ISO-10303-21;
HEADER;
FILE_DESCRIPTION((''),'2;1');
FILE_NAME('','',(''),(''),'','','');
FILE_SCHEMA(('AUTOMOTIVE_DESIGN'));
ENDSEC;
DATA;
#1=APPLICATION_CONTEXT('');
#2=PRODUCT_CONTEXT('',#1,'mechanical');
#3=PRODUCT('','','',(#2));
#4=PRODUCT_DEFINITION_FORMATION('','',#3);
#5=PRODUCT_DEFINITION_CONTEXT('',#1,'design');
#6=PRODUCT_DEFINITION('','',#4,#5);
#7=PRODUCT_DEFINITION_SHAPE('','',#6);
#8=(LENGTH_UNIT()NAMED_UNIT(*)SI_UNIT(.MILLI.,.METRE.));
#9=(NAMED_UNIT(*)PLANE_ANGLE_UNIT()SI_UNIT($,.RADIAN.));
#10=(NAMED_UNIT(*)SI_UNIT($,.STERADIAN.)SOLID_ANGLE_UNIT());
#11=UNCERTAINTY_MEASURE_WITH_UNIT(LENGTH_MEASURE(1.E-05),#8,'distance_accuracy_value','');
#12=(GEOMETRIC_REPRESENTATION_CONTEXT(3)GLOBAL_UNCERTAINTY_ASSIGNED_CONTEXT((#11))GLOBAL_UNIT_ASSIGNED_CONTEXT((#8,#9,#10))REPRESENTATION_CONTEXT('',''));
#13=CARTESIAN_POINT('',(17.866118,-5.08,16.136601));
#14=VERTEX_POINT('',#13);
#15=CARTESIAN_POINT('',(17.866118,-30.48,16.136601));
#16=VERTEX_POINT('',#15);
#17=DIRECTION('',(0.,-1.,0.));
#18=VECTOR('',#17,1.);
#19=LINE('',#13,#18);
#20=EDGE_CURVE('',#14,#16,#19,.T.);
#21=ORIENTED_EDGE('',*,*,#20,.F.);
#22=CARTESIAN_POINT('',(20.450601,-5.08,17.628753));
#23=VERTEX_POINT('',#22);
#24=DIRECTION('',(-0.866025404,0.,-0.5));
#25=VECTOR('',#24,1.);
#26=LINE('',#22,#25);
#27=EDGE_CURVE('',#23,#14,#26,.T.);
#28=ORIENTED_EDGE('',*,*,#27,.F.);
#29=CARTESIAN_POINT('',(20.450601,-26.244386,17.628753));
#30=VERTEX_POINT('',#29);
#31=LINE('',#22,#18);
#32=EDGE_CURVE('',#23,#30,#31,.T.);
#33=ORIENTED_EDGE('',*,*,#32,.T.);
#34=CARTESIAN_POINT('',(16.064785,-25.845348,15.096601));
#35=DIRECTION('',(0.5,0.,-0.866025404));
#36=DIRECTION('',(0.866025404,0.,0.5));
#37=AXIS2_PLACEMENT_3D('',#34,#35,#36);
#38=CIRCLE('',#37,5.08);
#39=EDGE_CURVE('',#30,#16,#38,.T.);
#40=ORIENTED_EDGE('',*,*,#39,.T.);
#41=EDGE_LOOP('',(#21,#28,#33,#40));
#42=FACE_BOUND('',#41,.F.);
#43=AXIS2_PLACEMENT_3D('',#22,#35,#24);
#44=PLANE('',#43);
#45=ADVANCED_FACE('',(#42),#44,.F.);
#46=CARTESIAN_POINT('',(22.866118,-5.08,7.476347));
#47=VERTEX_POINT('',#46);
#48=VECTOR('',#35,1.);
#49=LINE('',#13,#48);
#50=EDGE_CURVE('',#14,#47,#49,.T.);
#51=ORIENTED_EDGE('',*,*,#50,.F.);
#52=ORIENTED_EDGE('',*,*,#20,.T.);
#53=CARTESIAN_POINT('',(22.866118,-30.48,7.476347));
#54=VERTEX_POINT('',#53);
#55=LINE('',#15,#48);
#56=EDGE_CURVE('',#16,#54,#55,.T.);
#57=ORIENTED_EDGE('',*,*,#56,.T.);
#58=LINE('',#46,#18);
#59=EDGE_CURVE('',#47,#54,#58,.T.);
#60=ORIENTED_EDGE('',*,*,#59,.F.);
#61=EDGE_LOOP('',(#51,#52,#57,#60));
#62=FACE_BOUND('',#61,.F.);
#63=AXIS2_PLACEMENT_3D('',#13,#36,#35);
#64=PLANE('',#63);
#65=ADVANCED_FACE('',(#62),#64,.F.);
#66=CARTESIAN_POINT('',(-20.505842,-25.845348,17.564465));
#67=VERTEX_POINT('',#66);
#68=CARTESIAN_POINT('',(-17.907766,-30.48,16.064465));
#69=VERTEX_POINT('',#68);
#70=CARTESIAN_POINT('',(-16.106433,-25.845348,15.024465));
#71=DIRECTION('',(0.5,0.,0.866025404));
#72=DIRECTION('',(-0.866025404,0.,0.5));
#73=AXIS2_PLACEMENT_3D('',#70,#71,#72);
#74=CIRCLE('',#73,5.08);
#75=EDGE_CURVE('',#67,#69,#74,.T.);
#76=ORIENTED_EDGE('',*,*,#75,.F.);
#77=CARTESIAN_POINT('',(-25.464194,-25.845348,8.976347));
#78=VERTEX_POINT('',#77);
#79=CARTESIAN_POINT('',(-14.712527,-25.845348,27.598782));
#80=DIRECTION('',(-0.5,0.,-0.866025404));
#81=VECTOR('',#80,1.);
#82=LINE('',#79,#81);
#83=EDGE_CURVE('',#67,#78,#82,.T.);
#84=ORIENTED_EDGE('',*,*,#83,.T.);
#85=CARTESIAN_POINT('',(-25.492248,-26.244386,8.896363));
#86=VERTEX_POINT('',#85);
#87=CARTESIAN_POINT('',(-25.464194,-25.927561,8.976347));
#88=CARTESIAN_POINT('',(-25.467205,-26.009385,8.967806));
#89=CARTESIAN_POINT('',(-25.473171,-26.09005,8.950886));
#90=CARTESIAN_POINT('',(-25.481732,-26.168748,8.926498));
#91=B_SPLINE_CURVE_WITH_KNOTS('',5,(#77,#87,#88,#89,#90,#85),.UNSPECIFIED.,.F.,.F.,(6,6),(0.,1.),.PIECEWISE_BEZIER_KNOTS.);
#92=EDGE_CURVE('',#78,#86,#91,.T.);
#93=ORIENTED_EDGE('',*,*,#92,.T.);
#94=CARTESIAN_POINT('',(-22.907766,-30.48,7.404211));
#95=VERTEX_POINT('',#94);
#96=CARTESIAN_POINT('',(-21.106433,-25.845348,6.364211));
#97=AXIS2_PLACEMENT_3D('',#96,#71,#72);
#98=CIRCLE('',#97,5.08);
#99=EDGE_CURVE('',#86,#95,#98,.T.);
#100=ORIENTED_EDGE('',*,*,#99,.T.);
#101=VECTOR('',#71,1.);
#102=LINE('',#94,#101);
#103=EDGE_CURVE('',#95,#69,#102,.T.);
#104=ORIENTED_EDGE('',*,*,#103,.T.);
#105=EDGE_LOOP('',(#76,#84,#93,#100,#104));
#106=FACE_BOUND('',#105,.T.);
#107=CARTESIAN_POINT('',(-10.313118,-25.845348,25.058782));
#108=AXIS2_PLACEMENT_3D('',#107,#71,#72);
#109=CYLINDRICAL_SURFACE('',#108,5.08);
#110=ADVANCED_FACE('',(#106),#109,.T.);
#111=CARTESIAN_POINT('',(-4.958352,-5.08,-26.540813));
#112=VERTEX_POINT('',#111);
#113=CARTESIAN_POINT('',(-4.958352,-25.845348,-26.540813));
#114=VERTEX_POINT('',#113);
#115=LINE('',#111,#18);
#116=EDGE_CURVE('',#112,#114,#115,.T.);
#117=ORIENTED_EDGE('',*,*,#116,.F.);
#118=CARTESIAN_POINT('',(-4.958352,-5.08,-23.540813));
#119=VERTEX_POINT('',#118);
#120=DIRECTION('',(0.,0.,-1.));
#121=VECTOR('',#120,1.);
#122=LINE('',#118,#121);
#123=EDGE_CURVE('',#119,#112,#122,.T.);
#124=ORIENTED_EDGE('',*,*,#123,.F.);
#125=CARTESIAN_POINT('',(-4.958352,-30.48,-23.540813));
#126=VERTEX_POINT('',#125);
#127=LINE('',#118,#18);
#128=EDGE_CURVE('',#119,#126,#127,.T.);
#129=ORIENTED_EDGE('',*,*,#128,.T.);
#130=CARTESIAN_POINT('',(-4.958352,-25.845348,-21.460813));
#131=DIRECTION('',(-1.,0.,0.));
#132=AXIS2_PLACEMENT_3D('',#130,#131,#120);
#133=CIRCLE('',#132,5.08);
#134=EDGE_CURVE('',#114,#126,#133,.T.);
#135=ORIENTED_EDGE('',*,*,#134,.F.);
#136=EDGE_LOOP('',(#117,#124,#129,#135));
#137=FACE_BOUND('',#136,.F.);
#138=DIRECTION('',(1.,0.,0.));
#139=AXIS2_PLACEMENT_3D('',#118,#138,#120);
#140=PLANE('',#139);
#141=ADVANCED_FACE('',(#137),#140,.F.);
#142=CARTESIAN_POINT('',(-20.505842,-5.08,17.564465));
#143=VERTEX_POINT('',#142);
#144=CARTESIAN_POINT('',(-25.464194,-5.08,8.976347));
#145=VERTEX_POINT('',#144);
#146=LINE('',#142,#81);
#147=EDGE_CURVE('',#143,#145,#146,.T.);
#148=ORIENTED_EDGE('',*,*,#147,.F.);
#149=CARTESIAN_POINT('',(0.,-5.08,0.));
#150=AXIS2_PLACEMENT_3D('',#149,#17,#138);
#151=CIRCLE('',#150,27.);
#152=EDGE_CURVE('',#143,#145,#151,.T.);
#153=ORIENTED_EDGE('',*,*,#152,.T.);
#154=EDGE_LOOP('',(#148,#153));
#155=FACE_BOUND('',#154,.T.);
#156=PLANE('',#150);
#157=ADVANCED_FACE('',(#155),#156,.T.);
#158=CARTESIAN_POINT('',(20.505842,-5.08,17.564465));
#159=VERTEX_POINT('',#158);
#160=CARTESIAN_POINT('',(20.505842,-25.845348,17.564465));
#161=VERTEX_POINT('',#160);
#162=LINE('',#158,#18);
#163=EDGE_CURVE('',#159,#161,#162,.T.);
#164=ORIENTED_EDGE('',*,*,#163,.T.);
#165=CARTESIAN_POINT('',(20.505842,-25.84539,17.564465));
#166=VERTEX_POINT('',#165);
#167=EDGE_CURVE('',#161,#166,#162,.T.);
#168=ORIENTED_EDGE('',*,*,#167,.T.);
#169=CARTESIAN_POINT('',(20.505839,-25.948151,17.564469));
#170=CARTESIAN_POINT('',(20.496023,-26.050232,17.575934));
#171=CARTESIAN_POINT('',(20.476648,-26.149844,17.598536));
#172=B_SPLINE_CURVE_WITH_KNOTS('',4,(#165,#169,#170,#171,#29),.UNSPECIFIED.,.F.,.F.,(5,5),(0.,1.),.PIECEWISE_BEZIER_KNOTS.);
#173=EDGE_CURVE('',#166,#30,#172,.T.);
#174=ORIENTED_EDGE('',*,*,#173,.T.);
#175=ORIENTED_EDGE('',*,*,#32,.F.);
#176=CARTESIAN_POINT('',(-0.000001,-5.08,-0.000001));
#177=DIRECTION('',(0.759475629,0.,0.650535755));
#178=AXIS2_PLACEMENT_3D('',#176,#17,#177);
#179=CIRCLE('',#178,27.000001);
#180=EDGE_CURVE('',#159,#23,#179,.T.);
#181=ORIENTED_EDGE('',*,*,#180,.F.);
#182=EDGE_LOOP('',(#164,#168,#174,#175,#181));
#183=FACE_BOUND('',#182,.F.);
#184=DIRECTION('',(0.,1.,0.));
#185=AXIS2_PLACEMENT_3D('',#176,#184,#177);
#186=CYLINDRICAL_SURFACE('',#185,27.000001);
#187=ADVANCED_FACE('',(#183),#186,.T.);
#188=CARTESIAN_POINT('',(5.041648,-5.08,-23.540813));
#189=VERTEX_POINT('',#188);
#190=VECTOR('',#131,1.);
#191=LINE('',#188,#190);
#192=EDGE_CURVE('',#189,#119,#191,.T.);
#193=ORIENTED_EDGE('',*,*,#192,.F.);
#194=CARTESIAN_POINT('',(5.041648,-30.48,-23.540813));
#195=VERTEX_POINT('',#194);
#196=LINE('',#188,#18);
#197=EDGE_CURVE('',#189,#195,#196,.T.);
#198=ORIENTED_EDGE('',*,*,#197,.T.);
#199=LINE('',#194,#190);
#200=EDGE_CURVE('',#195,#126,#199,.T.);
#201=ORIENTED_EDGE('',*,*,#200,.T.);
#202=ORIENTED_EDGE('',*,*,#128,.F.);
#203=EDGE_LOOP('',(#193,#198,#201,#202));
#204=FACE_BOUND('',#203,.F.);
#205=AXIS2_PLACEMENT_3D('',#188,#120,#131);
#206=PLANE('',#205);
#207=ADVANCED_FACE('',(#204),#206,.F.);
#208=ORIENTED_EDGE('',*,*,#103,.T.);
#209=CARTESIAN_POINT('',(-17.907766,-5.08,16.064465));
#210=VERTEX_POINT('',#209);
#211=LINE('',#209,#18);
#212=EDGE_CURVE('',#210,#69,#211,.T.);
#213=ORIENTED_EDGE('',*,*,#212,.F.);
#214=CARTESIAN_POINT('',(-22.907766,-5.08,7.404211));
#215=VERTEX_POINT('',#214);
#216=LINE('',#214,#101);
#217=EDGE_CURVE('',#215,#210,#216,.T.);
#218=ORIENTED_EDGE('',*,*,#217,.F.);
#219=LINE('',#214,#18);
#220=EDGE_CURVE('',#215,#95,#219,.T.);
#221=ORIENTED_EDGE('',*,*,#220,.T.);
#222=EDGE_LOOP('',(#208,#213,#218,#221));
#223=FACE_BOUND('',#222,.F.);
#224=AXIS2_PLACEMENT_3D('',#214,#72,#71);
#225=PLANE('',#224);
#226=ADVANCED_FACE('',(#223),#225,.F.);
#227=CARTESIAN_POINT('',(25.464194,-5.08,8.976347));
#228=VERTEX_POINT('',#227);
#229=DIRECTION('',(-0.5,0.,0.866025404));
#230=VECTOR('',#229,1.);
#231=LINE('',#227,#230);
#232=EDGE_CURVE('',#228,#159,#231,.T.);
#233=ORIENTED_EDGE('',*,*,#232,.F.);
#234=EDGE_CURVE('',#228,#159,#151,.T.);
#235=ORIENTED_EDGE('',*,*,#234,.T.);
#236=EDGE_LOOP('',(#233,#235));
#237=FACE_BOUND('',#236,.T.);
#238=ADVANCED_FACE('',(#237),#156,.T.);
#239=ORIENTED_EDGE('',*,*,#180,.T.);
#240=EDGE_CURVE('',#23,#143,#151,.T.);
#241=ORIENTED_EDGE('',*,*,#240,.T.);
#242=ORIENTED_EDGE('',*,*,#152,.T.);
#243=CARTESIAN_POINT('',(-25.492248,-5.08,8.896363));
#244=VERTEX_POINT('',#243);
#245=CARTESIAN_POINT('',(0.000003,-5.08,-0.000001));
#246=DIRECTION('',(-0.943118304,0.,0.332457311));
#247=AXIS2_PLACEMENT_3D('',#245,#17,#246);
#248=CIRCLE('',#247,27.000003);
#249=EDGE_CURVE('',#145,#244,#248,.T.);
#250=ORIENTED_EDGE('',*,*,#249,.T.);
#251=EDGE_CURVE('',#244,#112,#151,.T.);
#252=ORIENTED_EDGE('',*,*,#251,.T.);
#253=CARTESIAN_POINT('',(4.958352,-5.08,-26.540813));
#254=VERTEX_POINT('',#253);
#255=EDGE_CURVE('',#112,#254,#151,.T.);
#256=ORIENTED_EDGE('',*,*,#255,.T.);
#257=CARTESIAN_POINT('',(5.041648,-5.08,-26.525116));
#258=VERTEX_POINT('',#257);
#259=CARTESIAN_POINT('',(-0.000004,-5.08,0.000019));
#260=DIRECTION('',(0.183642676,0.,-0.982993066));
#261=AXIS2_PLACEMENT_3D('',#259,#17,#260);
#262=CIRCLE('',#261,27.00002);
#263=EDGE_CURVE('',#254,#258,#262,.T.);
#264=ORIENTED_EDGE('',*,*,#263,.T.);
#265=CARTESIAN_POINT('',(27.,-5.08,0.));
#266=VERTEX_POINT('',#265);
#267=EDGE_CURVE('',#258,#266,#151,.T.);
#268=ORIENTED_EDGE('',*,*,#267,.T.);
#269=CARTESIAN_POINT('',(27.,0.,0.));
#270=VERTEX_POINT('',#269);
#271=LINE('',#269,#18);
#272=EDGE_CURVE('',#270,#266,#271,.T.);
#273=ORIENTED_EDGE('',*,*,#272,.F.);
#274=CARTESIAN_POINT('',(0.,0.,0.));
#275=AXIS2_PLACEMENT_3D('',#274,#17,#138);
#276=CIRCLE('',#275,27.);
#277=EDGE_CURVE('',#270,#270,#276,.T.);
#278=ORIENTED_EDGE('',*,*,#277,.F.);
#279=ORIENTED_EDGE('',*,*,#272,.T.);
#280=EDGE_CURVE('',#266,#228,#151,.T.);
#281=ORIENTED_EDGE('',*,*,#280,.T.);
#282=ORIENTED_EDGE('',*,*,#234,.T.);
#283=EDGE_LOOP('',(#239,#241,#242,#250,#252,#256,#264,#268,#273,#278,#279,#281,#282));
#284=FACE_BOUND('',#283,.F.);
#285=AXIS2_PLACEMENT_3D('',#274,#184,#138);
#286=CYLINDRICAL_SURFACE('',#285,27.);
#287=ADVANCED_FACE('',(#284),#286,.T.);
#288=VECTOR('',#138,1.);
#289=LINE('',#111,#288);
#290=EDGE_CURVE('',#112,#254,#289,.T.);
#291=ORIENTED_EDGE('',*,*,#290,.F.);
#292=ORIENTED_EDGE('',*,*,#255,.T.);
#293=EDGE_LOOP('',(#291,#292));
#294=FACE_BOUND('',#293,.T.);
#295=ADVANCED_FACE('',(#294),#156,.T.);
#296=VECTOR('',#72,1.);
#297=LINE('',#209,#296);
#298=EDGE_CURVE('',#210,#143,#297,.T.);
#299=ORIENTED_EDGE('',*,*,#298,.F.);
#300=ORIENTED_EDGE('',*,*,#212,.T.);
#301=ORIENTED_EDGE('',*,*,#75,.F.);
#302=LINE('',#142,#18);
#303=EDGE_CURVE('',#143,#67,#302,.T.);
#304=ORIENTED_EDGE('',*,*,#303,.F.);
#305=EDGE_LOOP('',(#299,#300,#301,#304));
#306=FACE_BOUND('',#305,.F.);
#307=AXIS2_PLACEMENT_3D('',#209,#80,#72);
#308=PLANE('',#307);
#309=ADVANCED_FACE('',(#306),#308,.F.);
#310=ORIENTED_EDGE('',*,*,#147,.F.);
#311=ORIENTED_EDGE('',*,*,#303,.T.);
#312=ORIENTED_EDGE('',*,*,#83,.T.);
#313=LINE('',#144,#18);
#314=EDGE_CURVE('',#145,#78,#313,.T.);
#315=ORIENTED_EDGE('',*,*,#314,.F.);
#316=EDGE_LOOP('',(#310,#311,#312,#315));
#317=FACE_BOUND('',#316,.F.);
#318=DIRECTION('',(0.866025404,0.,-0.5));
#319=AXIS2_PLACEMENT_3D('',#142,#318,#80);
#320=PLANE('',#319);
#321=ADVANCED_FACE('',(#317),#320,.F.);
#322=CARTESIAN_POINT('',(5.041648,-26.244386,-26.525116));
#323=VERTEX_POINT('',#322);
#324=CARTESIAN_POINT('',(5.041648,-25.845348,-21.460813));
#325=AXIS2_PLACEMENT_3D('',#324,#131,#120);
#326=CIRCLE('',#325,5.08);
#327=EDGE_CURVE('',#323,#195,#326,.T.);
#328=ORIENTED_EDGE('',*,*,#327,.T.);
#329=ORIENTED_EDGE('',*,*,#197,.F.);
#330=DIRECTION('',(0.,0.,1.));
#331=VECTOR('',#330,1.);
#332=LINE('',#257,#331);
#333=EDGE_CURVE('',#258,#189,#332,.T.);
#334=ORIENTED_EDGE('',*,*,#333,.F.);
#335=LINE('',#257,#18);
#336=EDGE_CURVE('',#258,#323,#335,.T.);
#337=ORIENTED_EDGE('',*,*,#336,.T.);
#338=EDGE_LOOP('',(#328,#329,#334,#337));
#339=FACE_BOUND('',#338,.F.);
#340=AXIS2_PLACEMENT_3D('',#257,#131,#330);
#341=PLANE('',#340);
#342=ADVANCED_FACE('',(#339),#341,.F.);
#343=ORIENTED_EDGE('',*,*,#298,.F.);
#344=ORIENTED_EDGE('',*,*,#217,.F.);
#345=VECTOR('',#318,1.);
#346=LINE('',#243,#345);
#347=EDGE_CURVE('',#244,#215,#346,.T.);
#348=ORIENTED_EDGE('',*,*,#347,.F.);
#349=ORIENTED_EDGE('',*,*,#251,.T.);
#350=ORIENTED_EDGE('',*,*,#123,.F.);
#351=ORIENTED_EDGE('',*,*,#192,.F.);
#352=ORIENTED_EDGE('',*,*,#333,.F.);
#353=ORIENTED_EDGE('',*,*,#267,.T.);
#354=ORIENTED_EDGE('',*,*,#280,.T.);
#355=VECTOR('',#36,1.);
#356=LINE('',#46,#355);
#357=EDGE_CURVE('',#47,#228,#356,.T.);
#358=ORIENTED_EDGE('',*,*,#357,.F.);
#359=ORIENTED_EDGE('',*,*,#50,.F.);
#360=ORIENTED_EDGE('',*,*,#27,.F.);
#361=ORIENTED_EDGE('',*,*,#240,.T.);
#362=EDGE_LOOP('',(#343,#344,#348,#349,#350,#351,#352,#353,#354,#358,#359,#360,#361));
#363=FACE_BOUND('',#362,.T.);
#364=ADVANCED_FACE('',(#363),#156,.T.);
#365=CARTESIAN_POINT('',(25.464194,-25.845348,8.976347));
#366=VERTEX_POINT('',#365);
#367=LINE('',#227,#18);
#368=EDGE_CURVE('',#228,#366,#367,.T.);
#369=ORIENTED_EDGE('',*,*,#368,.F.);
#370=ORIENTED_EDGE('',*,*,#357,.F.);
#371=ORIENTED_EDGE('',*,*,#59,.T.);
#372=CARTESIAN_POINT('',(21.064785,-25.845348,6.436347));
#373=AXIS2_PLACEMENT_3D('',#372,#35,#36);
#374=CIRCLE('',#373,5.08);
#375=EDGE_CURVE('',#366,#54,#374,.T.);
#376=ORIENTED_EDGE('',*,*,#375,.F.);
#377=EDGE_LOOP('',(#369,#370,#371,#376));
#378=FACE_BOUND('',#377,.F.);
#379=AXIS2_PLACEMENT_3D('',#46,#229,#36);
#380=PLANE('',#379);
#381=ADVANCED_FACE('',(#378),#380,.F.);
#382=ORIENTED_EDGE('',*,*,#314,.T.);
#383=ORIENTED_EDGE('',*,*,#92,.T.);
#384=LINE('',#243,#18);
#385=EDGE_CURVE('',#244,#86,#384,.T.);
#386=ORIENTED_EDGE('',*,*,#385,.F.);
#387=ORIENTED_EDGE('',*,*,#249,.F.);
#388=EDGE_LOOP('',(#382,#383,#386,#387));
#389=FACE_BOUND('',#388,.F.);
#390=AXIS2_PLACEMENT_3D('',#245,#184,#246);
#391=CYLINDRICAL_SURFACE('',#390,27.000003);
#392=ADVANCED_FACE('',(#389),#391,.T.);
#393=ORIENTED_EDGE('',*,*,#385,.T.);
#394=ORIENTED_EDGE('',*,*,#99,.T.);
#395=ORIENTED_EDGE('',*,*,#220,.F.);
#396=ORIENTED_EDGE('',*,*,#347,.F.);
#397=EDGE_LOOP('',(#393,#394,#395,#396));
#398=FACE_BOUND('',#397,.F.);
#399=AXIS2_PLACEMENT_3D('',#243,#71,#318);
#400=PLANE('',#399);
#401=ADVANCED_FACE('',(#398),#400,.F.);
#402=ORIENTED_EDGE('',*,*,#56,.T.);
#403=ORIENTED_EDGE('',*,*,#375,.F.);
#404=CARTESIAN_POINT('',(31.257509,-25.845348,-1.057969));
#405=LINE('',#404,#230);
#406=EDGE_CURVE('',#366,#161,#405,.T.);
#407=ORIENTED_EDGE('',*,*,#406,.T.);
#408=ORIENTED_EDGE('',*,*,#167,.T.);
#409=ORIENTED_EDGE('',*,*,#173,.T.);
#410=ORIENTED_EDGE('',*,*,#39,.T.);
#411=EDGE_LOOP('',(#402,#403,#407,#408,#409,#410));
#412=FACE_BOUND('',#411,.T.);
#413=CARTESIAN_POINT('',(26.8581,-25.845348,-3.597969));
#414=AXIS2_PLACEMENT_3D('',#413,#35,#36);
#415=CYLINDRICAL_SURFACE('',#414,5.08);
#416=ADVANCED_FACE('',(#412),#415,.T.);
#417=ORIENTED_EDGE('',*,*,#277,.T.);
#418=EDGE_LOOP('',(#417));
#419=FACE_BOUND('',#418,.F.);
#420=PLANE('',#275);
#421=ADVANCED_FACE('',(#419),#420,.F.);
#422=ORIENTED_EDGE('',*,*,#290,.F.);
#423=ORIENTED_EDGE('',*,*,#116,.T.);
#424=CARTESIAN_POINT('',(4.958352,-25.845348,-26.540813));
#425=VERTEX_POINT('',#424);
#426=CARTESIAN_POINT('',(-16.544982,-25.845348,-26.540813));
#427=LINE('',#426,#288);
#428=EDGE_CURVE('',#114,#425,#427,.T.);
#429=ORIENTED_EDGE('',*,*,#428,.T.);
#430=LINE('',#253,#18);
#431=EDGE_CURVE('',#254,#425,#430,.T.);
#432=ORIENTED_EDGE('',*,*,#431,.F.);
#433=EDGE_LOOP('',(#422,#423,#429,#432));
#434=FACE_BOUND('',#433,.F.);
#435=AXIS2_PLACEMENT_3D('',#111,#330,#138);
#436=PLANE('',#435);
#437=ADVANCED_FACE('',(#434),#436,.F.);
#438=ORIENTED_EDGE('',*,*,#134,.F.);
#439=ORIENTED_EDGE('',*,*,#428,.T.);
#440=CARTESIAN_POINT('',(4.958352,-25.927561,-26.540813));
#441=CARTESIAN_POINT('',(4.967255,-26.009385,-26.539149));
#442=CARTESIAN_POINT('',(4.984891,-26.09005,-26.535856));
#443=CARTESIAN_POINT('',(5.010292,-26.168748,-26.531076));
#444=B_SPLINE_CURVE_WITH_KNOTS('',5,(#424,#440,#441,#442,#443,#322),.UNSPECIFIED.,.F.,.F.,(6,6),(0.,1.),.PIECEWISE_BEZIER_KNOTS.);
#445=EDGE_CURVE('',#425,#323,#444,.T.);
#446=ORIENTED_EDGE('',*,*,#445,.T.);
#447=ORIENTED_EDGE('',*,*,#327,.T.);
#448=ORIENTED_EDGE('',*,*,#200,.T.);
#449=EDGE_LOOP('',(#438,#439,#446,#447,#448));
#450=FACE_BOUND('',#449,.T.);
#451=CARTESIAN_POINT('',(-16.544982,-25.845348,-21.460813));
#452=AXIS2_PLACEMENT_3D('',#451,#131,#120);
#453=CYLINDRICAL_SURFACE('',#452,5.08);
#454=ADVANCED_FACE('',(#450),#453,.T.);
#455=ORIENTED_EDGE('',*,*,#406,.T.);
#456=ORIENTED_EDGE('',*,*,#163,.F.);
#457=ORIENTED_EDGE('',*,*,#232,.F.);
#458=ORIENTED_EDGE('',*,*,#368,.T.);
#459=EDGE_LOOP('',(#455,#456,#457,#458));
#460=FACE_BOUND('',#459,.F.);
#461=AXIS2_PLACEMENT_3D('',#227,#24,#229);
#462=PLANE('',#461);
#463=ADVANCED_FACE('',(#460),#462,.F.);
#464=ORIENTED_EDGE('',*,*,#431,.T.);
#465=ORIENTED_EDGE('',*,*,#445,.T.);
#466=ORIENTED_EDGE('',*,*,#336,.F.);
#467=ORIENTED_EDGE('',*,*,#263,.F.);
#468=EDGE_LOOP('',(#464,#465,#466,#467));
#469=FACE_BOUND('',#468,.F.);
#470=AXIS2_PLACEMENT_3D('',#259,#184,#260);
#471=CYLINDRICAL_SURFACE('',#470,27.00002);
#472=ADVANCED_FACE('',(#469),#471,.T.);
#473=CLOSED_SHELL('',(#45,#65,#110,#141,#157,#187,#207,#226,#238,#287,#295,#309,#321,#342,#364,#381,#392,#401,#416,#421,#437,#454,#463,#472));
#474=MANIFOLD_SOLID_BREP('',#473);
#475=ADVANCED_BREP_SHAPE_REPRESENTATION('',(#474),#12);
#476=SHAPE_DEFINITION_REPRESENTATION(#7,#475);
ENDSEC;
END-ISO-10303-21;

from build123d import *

# Parameters (mm, degrees)
F0_R        = 27
F1_DEPTH    = 5.08
F3_DEPTH    = 25.4
F4_T1_DEPTH = 33.0899649141
F4_T3_DEPTH = 33.0899649141
F4_T5_DEPTH = 33.0899649141


# Not quite as in the source:
# - a fillet or chamfer that OpenCascade refuses, or shapes differently, is made with other operations: its cross-section is extruded or revolved along the edge and cut away or added


with BuildPart() as f1:
    # F0 (on Front) → F1 (new body)
    with BuildSketch(Plane.XZ):
        Circle(F0_R)
    extrude(amount=F1_DEPTH)

    # F2 (on face) → F3 (join)
    with BuildSketch(Plane.XZ.offset(5.08)):
        with BuildLine():
            ThreePointArc((-25.4641942221, 8.9763473985), (-25.4782526607, 8.9363662278), (-25.4922483252, 8.8963630393))
            Line((-25.4922483252, 8.8963630393), (-22.90776578, 7.4042113462))
            Line((-22.90776578, 7.4042113462), (-17.90776578, 16.064465384))
            Line((-17.90776578, 16.064465384), (-20.5058419913, 17.564465384))
            Line((-20.5058419913, 17.564465384), (-25.4641942221, 8.9763473985))
        make_face()
        with BuildLine():
            Line((22.8661180108, 7.4763473985), (25.4641942221, 8.9763473985))
            Line((25.4641942221, 8.9763473985), (20.5058419913, 17.564465384))
            ThreePointArc((20.5058419913, 17.564465384), (20.4782465011, 17.5966309343), (20.4506005559, 17.6287531295))
            Line((20.4506005559, 17.6287531295), (17.8661180108, 16.1366014363))
            Line((17.8661180108, 16.1366014363), (22.8661180108, 7.4763473985))
        make_face()
        with BuildLine():
            Line((-4.9583522308, -23.5408127825), (-4.9583522308, -26.5408127825))
            Line((-4.9583522308, -26.5408127825), (4.9583522308, -26.5408127825))
            ThreePointArc((4.9583522308, -26.5408127825), (5.0000061596, -26.5329971621), (5.0416477692, -26.5251161689))
            Line((5.0416477692, -26.5251161689), (5.0416477692, -23.5408127825))
            Line((5.0416477692, -23.5408127825), (-4.9583522308, -23.5408127825))
        make_face()
    extrude(amount=F3_DEPTH)

    # F4: fillet of radius 5.08 on 3 edges, made by hand

    # F4_s2 → F4_t1 (cut)
    with BuildSketch(Plane(origin=(8.2724912285, 0, 14.328375113), x_dir=(0, 1, 0), z_dir=(-0.5, 0, -0.8660254038))):
        with BuildLine():
            ThreePointArc((-25.8453479095, -26.5408127825), (-28.6057826579, -25.7253643416), (-30.48, -23.5408127825))
            Line((-30.48, -23.5408127825), (-30.48, -26.5408127825))
            Line((-30.48, -26.5408127825), (-25.8453479095, -26.5408127825))
        make_face()
    extrude(amount=F4_T1_DEPTH, mode=Mode.SUBTRACT)

    # F4_s4 → F4_t3 (cut)
    with BuildSketch(Plane.YZ.offset(-16.544982457)):
        with BuildLine():
            ThreePointArc((-25.8453479095, -26.5408127825), (-28.6057826579, -25.7253643416), (-30.48, -23.5408127825))
            Line((-30.48, -23.5408127825), (-30.48, -26.5408127825))
            Line((-30.48, -26.5408127825), (-25.8453479095, -26.5408127825))
        make_face()
    extrude(amount=F4_T3_DEPTH, mode=Mode.SUBTRACT)

    # F4_s6 → F4_t5 (cut)
    with BuildSketch(Plane(origin=(8.2724912285, 0, -14.328375113), x_dir=(0, 1, 0), z_dir=(-0.5, 0, 0.8660254038))):
        with BuildLine():
            ThreePointArc((-25.8453479095, -26.5408127825), (-28.6057826579, -25.7253643416), (-30.48, -23.5408127825))
            Line((-30.48, -23.5408127825), (-30.48, -26.5408127825))
            Line((-30.48, -26.5408127825), (-25.8453479095, -26.5408127825))
        make_face()
    extrude(amount=F4_T5_DEPTH, mode=Mode.SUBTRACT)


solid = f1.part
